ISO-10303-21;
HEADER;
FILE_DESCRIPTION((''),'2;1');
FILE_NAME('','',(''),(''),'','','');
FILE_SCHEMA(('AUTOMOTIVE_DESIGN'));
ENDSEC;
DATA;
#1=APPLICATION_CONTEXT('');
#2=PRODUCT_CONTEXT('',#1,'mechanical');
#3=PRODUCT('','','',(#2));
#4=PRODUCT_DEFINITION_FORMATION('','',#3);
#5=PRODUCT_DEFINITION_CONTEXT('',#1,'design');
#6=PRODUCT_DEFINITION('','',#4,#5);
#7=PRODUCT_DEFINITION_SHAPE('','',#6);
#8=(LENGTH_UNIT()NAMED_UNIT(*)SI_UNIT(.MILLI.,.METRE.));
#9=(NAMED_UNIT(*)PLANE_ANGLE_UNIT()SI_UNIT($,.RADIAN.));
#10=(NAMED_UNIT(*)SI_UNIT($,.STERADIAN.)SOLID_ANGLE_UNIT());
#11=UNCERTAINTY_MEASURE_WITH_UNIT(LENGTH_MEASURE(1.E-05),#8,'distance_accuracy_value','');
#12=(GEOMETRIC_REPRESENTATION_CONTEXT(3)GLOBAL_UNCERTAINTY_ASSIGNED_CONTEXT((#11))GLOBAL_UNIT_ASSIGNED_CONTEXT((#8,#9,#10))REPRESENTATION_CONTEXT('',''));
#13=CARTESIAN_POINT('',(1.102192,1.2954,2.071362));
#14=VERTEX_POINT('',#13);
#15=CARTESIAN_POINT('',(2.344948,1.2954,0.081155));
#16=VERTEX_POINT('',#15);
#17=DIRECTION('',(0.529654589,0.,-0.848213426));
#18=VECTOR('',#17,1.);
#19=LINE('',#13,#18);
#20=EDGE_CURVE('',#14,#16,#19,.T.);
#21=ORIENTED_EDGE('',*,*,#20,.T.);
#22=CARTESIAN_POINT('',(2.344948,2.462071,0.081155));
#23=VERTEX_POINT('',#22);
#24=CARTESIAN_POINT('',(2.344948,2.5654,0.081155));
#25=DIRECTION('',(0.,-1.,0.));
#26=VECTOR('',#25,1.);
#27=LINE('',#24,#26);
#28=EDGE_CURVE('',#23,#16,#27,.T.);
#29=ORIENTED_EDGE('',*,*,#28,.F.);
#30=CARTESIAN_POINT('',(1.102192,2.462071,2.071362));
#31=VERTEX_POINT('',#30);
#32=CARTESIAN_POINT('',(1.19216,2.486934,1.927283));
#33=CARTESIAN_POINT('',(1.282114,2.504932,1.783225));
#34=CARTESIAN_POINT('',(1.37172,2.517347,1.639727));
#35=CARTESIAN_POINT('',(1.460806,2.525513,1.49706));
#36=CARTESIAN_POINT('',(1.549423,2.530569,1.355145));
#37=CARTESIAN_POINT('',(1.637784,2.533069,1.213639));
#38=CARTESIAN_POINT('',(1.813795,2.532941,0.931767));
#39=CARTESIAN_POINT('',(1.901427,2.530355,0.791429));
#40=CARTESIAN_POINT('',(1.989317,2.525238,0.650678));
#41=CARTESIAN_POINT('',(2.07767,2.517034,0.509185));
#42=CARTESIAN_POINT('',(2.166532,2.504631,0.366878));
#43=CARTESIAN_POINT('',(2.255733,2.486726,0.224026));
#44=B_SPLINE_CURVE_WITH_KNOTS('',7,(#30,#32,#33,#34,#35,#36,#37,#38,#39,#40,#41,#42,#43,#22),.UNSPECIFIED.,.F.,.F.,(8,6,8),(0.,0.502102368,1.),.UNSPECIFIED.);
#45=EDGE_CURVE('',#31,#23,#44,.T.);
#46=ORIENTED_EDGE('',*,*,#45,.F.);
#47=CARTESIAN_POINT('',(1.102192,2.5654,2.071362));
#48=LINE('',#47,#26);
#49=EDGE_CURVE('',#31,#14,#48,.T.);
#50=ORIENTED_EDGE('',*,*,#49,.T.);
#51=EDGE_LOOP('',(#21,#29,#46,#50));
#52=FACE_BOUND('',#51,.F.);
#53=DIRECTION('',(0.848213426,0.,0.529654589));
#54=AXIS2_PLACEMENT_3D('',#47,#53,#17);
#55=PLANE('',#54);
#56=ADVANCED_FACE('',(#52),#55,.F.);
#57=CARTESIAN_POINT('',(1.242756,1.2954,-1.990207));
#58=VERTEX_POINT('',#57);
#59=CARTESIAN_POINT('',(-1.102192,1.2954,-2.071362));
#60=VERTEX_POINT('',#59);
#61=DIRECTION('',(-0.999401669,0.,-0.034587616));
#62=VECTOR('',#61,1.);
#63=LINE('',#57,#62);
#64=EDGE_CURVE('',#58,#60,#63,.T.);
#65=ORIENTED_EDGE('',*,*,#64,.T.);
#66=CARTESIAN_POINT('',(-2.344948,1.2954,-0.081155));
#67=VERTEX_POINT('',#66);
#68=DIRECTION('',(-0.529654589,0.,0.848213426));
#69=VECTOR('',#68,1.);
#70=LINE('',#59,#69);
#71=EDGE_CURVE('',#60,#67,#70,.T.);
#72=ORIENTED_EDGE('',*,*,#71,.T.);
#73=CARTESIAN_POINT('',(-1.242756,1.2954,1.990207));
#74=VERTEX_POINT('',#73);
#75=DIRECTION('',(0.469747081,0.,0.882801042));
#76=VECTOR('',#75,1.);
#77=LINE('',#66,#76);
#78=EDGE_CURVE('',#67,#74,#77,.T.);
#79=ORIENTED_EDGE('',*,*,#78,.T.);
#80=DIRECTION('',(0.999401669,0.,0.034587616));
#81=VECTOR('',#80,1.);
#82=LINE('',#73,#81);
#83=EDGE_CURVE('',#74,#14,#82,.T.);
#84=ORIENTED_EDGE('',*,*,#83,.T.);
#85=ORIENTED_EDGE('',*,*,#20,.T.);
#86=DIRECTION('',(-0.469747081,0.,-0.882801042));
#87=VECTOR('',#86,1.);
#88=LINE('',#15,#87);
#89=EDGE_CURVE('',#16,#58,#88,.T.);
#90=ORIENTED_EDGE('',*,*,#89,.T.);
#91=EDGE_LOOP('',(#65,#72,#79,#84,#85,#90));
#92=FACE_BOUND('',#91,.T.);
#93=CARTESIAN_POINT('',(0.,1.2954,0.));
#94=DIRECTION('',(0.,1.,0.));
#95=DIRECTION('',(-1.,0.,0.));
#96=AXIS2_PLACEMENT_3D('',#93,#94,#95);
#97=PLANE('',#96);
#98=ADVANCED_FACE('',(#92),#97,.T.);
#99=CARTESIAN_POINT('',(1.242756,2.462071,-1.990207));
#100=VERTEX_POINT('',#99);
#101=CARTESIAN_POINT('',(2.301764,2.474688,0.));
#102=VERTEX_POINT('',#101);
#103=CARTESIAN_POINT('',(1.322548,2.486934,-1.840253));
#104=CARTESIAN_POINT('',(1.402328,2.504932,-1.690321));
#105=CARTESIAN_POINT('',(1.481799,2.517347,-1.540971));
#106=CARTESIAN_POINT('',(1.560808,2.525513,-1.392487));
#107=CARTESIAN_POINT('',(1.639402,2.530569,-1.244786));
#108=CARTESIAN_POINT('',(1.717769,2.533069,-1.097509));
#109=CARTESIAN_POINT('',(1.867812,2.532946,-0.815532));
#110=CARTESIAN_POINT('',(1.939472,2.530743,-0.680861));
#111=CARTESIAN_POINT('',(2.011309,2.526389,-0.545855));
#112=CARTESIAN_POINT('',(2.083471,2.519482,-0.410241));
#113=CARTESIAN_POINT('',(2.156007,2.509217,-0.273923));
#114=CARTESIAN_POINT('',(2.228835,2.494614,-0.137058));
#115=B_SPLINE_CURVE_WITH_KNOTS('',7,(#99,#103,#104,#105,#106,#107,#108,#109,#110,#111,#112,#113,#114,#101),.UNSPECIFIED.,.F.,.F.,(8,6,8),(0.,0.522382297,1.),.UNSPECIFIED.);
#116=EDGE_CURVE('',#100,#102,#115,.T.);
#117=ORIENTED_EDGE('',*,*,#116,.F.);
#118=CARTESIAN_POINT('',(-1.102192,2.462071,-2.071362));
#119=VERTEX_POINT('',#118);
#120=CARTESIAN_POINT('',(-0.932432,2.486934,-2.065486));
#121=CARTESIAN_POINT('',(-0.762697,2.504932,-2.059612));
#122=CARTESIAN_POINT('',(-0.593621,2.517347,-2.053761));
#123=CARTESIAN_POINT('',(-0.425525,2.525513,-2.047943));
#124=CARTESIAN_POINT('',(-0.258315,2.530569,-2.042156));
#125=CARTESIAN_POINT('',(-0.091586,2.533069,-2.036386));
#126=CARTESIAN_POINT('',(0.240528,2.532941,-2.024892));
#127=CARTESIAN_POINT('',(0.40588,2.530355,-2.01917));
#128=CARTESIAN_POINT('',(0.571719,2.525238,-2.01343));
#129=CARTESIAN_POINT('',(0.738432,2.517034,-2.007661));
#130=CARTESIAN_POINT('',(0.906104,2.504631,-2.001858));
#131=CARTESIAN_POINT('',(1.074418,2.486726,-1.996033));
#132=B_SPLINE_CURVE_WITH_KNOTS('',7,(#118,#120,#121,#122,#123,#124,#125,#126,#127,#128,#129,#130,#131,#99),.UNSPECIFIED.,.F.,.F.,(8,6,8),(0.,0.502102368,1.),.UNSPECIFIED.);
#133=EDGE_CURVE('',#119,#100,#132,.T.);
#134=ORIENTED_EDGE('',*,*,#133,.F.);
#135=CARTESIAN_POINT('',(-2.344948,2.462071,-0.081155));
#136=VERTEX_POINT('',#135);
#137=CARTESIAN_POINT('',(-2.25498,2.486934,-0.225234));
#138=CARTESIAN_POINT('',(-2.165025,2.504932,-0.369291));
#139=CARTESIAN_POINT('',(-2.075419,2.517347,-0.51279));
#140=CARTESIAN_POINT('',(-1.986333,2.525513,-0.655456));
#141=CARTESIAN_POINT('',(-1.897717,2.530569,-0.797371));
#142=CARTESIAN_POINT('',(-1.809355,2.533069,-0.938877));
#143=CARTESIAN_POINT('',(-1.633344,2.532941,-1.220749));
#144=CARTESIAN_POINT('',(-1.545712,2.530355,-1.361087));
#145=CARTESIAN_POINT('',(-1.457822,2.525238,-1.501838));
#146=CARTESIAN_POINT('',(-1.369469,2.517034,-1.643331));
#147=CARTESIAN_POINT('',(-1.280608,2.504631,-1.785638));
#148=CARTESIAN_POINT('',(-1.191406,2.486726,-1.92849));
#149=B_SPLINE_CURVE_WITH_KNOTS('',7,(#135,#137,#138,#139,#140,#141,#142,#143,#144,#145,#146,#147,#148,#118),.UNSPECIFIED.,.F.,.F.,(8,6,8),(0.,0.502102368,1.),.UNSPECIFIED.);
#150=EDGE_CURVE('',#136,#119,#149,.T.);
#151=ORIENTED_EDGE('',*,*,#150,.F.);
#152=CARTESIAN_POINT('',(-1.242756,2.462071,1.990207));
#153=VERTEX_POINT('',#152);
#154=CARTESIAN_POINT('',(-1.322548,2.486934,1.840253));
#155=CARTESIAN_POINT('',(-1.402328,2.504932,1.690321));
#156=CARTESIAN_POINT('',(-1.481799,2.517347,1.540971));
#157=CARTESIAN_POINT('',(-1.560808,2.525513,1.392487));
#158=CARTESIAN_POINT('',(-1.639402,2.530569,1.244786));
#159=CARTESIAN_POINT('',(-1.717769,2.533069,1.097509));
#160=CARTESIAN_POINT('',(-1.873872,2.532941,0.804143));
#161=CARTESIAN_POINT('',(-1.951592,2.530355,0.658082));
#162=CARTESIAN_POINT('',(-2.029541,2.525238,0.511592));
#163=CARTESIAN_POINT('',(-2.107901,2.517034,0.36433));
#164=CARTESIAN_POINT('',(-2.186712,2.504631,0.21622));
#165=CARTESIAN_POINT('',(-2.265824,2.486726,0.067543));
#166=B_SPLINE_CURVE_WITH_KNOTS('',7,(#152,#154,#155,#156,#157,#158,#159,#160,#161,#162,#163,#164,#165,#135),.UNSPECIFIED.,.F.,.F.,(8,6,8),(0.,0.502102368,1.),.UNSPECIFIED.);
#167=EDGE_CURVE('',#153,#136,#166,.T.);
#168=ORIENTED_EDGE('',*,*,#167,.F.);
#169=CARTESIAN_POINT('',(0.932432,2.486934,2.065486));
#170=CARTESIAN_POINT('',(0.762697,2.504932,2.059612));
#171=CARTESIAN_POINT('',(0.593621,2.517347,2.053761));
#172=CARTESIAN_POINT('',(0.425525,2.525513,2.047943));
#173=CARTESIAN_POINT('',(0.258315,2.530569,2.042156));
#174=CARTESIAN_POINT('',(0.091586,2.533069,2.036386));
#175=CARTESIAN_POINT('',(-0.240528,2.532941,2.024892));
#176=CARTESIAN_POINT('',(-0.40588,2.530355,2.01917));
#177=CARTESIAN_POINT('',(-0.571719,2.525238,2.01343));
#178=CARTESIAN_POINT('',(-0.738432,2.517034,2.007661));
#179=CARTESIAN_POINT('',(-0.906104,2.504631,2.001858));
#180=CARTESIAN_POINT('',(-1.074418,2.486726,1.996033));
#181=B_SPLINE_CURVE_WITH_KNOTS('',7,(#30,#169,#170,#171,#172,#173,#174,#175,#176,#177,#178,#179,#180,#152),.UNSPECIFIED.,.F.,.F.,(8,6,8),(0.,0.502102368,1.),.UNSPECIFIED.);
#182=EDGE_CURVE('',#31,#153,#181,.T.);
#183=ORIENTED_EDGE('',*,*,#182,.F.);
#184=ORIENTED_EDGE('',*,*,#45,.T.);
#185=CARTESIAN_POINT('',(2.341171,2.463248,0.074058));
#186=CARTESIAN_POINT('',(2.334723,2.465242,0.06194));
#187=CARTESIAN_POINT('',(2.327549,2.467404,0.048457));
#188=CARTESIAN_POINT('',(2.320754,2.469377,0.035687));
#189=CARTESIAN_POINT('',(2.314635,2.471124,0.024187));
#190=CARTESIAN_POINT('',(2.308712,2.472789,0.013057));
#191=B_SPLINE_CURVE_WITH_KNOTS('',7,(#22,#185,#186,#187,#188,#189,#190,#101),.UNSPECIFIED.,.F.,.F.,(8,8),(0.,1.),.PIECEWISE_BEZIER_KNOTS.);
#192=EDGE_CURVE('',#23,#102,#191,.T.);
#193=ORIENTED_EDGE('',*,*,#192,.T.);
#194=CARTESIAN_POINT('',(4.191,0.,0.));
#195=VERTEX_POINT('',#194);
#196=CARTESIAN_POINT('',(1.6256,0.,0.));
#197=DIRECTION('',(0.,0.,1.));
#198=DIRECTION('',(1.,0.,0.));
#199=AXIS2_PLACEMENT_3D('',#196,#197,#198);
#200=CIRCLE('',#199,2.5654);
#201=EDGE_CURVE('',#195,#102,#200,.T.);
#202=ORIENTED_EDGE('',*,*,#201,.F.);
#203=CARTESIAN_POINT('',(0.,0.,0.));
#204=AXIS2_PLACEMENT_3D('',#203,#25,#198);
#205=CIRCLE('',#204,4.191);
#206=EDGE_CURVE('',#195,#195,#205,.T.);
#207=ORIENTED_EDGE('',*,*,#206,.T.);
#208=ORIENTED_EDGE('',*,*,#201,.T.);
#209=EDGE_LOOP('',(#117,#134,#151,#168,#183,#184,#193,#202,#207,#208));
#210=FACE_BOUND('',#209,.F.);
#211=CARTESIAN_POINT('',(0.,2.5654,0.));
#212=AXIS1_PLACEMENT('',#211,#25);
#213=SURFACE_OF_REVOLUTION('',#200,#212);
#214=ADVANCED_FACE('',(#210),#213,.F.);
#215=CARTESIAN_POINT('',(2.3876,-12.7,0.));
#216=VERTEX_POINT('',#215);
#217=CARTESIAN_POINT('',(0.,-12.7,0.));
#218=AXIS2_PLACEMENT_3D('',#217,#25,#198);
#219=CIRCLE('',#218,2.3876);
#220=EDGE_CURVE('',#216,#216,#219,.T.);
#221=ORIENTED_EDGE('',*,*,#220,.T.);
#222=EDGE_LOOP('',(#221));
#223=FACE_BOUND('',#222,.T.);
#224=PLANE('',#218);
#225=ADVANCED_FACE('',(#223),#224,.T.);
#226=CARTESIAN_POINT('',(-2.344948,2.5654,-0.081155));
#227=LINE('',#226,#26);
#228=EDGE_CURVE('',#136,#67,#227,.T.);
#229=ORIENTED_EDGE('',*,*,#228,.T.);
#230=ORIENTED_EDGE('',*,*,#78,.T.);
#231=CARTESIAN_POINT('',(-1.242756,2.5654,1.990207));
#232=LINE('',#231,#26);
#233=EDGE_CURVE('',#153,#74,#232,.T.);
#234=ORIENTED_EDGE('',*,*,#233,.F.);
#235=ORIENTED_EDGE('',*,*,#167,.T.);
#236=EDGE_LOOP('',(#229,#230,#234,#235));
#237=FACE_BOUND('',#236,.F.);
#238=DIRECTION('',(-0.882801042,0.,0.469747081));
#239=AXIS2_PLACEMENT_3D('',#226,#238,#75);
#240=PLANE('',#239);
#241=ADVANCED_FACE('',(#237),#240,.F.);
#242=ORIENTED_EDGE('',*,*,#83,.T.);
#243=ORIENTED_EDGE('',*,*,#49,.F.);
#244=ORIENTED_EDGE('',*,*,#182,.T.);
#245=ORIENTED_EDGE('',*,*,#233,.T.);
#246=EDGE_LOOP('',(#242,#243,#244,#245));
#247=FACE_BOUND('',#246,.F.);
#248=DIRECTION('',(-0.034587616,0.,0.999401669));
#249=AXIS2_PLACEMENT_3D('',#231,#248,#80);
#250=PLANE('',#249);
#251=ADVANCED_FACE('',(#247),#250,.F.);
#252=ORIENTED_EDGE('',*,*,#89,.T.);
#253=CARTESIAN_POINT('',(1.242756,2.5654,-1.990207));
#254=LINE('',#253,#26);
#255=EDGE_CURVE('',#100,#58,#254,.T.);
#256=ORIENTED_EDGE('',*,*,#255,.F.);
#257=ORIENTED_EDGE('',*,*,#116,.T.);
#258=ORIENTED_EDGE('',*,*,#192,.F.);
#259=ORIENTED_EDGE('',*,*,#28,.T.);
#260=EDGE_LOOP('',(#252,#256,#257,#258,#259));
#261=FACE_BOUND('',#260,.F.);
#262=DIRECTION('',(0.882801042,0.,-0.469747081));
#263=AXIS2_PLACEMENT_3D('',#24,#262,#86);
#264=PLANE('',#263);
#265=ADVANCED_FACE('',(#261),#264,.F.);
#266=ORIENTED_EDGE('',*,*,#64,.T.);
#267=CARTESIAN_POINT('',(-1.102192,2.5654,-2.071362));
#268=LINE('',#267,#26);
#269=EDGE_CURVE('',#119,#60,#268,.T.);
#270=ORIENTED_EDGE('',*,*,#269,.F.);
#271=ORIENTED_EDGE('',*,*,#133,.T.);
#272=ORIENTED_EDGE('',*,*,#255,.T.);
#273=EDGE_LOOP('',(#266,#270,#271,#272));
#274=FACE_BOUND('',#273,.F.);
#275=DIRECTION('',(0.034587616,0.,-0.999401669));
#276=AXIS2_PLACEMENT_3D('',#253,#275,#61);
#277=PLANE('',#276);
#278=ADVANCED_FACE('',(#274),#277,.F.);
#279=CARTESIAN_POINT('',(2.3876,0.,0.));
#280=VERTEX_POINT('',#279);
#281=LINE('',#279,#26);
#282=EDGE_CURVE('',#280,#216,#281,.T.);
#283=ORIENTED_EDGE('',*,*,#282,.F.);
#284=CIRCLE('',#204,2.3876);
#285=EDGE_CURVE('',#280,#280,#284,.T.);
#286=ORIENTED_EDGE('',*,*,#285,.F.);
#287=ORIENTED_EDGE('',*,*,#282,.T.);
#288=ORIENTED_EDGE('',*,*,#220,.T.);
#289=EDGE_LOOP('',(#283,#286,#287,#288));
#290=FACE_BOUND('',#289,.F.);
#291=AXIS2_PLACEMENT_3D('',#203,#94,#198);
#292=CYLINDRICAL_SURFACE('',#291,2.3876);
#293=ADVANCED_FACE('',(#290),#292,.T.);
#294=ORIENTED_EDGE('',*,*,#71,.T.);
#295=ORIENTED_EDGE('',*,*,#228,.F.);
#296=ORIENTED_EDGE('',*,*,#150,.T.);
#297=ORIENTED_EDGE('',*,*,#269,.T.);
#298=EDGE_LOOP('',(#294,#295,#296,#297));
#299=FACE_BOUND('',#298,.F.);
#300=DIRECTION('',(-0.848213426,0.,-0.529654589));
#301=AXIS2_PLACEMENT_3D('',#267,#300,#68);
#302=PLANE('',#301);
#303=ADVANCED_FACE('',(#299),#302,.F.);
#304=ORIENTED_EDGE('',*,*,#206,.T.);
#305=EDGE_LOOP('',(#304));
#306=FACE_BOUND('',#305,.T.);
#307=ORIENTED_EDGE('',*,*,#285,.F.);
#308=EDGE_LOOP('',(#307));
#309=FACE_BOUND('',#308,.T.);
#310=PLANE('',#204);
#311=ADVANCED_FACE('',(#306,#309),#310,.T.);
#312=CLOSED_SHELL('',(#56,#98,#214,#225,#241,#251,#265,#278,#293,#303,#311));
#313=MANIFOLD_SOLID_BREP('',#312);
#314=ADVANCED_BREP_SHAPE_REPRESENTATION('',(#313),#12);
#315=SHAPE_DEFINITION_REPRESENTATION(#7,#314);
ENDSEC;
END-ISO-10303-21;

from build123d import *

# Parameters (mm, degrees)
F0_R     = 4.191
F1_DEPTH = 2.5654
F2_R     = 2.3876
F3_DEPTH = 12.7
F5_DEPTH = 1.27


# Not quite as in the source:
# - a fillet or chamfer that OpenCascade refuses, or shapes differently, is made with other operations: its cross-section is extruded or revolved along the edge and cut away or added


with BuildPart() as f1:
    # F0 (on Front) → F1 (new body)
    with BuildSketch(Plane.XZ):
        Circle(F0_R)
    extrude(amount=-F1_DEPTH)

    # F2 (on face) → F3 (join)
    with BuildSketch(Plane.XZ):
        Circle(F2_R)
    extrude(amount=F3_DEPTH)

    # F4 (on face) → F5 (cut)
    with BuildSketch(Plane(origin=(0, 2.5654, 0), x_dir=(-1, 0, 0), z_dir=(0, 1, 0))):
        Polygon((-2.3449476001, 0.0811547043), (-1.2427558356, -1.9902068401), (1.1021917645, -2.0713615444), (2.3449476001, -0.0811547043), (1.2427558356, 1.9902068401), (-1.1021917645, 2.0713615444), align=None)
    extrude(amount=-F5_DEPTH, mode=Mode.SUBTRACT)

    # F6: fillet of radius 2.5654 on 1 edges, made by hand

    # F6_s1 → F6_t2 (revolve, cut)
    with BuildSketch(Plane.XY):
        with BuildLine():
            ThreePointArc((4.191, 0), (3.4396117365, 1.8140117365), (1.6256, 2.5654))
            Line((1.6256, 2.5654), (4.191, 2.5654))
            Line((4.191, 2.5654), (4.191, 0))
        make_face()
    revolve(axis=Axis((0, 2.5654, 0), (0, -1, 0)), mode=Mode.SUBTRACT)


solid = f1.part
